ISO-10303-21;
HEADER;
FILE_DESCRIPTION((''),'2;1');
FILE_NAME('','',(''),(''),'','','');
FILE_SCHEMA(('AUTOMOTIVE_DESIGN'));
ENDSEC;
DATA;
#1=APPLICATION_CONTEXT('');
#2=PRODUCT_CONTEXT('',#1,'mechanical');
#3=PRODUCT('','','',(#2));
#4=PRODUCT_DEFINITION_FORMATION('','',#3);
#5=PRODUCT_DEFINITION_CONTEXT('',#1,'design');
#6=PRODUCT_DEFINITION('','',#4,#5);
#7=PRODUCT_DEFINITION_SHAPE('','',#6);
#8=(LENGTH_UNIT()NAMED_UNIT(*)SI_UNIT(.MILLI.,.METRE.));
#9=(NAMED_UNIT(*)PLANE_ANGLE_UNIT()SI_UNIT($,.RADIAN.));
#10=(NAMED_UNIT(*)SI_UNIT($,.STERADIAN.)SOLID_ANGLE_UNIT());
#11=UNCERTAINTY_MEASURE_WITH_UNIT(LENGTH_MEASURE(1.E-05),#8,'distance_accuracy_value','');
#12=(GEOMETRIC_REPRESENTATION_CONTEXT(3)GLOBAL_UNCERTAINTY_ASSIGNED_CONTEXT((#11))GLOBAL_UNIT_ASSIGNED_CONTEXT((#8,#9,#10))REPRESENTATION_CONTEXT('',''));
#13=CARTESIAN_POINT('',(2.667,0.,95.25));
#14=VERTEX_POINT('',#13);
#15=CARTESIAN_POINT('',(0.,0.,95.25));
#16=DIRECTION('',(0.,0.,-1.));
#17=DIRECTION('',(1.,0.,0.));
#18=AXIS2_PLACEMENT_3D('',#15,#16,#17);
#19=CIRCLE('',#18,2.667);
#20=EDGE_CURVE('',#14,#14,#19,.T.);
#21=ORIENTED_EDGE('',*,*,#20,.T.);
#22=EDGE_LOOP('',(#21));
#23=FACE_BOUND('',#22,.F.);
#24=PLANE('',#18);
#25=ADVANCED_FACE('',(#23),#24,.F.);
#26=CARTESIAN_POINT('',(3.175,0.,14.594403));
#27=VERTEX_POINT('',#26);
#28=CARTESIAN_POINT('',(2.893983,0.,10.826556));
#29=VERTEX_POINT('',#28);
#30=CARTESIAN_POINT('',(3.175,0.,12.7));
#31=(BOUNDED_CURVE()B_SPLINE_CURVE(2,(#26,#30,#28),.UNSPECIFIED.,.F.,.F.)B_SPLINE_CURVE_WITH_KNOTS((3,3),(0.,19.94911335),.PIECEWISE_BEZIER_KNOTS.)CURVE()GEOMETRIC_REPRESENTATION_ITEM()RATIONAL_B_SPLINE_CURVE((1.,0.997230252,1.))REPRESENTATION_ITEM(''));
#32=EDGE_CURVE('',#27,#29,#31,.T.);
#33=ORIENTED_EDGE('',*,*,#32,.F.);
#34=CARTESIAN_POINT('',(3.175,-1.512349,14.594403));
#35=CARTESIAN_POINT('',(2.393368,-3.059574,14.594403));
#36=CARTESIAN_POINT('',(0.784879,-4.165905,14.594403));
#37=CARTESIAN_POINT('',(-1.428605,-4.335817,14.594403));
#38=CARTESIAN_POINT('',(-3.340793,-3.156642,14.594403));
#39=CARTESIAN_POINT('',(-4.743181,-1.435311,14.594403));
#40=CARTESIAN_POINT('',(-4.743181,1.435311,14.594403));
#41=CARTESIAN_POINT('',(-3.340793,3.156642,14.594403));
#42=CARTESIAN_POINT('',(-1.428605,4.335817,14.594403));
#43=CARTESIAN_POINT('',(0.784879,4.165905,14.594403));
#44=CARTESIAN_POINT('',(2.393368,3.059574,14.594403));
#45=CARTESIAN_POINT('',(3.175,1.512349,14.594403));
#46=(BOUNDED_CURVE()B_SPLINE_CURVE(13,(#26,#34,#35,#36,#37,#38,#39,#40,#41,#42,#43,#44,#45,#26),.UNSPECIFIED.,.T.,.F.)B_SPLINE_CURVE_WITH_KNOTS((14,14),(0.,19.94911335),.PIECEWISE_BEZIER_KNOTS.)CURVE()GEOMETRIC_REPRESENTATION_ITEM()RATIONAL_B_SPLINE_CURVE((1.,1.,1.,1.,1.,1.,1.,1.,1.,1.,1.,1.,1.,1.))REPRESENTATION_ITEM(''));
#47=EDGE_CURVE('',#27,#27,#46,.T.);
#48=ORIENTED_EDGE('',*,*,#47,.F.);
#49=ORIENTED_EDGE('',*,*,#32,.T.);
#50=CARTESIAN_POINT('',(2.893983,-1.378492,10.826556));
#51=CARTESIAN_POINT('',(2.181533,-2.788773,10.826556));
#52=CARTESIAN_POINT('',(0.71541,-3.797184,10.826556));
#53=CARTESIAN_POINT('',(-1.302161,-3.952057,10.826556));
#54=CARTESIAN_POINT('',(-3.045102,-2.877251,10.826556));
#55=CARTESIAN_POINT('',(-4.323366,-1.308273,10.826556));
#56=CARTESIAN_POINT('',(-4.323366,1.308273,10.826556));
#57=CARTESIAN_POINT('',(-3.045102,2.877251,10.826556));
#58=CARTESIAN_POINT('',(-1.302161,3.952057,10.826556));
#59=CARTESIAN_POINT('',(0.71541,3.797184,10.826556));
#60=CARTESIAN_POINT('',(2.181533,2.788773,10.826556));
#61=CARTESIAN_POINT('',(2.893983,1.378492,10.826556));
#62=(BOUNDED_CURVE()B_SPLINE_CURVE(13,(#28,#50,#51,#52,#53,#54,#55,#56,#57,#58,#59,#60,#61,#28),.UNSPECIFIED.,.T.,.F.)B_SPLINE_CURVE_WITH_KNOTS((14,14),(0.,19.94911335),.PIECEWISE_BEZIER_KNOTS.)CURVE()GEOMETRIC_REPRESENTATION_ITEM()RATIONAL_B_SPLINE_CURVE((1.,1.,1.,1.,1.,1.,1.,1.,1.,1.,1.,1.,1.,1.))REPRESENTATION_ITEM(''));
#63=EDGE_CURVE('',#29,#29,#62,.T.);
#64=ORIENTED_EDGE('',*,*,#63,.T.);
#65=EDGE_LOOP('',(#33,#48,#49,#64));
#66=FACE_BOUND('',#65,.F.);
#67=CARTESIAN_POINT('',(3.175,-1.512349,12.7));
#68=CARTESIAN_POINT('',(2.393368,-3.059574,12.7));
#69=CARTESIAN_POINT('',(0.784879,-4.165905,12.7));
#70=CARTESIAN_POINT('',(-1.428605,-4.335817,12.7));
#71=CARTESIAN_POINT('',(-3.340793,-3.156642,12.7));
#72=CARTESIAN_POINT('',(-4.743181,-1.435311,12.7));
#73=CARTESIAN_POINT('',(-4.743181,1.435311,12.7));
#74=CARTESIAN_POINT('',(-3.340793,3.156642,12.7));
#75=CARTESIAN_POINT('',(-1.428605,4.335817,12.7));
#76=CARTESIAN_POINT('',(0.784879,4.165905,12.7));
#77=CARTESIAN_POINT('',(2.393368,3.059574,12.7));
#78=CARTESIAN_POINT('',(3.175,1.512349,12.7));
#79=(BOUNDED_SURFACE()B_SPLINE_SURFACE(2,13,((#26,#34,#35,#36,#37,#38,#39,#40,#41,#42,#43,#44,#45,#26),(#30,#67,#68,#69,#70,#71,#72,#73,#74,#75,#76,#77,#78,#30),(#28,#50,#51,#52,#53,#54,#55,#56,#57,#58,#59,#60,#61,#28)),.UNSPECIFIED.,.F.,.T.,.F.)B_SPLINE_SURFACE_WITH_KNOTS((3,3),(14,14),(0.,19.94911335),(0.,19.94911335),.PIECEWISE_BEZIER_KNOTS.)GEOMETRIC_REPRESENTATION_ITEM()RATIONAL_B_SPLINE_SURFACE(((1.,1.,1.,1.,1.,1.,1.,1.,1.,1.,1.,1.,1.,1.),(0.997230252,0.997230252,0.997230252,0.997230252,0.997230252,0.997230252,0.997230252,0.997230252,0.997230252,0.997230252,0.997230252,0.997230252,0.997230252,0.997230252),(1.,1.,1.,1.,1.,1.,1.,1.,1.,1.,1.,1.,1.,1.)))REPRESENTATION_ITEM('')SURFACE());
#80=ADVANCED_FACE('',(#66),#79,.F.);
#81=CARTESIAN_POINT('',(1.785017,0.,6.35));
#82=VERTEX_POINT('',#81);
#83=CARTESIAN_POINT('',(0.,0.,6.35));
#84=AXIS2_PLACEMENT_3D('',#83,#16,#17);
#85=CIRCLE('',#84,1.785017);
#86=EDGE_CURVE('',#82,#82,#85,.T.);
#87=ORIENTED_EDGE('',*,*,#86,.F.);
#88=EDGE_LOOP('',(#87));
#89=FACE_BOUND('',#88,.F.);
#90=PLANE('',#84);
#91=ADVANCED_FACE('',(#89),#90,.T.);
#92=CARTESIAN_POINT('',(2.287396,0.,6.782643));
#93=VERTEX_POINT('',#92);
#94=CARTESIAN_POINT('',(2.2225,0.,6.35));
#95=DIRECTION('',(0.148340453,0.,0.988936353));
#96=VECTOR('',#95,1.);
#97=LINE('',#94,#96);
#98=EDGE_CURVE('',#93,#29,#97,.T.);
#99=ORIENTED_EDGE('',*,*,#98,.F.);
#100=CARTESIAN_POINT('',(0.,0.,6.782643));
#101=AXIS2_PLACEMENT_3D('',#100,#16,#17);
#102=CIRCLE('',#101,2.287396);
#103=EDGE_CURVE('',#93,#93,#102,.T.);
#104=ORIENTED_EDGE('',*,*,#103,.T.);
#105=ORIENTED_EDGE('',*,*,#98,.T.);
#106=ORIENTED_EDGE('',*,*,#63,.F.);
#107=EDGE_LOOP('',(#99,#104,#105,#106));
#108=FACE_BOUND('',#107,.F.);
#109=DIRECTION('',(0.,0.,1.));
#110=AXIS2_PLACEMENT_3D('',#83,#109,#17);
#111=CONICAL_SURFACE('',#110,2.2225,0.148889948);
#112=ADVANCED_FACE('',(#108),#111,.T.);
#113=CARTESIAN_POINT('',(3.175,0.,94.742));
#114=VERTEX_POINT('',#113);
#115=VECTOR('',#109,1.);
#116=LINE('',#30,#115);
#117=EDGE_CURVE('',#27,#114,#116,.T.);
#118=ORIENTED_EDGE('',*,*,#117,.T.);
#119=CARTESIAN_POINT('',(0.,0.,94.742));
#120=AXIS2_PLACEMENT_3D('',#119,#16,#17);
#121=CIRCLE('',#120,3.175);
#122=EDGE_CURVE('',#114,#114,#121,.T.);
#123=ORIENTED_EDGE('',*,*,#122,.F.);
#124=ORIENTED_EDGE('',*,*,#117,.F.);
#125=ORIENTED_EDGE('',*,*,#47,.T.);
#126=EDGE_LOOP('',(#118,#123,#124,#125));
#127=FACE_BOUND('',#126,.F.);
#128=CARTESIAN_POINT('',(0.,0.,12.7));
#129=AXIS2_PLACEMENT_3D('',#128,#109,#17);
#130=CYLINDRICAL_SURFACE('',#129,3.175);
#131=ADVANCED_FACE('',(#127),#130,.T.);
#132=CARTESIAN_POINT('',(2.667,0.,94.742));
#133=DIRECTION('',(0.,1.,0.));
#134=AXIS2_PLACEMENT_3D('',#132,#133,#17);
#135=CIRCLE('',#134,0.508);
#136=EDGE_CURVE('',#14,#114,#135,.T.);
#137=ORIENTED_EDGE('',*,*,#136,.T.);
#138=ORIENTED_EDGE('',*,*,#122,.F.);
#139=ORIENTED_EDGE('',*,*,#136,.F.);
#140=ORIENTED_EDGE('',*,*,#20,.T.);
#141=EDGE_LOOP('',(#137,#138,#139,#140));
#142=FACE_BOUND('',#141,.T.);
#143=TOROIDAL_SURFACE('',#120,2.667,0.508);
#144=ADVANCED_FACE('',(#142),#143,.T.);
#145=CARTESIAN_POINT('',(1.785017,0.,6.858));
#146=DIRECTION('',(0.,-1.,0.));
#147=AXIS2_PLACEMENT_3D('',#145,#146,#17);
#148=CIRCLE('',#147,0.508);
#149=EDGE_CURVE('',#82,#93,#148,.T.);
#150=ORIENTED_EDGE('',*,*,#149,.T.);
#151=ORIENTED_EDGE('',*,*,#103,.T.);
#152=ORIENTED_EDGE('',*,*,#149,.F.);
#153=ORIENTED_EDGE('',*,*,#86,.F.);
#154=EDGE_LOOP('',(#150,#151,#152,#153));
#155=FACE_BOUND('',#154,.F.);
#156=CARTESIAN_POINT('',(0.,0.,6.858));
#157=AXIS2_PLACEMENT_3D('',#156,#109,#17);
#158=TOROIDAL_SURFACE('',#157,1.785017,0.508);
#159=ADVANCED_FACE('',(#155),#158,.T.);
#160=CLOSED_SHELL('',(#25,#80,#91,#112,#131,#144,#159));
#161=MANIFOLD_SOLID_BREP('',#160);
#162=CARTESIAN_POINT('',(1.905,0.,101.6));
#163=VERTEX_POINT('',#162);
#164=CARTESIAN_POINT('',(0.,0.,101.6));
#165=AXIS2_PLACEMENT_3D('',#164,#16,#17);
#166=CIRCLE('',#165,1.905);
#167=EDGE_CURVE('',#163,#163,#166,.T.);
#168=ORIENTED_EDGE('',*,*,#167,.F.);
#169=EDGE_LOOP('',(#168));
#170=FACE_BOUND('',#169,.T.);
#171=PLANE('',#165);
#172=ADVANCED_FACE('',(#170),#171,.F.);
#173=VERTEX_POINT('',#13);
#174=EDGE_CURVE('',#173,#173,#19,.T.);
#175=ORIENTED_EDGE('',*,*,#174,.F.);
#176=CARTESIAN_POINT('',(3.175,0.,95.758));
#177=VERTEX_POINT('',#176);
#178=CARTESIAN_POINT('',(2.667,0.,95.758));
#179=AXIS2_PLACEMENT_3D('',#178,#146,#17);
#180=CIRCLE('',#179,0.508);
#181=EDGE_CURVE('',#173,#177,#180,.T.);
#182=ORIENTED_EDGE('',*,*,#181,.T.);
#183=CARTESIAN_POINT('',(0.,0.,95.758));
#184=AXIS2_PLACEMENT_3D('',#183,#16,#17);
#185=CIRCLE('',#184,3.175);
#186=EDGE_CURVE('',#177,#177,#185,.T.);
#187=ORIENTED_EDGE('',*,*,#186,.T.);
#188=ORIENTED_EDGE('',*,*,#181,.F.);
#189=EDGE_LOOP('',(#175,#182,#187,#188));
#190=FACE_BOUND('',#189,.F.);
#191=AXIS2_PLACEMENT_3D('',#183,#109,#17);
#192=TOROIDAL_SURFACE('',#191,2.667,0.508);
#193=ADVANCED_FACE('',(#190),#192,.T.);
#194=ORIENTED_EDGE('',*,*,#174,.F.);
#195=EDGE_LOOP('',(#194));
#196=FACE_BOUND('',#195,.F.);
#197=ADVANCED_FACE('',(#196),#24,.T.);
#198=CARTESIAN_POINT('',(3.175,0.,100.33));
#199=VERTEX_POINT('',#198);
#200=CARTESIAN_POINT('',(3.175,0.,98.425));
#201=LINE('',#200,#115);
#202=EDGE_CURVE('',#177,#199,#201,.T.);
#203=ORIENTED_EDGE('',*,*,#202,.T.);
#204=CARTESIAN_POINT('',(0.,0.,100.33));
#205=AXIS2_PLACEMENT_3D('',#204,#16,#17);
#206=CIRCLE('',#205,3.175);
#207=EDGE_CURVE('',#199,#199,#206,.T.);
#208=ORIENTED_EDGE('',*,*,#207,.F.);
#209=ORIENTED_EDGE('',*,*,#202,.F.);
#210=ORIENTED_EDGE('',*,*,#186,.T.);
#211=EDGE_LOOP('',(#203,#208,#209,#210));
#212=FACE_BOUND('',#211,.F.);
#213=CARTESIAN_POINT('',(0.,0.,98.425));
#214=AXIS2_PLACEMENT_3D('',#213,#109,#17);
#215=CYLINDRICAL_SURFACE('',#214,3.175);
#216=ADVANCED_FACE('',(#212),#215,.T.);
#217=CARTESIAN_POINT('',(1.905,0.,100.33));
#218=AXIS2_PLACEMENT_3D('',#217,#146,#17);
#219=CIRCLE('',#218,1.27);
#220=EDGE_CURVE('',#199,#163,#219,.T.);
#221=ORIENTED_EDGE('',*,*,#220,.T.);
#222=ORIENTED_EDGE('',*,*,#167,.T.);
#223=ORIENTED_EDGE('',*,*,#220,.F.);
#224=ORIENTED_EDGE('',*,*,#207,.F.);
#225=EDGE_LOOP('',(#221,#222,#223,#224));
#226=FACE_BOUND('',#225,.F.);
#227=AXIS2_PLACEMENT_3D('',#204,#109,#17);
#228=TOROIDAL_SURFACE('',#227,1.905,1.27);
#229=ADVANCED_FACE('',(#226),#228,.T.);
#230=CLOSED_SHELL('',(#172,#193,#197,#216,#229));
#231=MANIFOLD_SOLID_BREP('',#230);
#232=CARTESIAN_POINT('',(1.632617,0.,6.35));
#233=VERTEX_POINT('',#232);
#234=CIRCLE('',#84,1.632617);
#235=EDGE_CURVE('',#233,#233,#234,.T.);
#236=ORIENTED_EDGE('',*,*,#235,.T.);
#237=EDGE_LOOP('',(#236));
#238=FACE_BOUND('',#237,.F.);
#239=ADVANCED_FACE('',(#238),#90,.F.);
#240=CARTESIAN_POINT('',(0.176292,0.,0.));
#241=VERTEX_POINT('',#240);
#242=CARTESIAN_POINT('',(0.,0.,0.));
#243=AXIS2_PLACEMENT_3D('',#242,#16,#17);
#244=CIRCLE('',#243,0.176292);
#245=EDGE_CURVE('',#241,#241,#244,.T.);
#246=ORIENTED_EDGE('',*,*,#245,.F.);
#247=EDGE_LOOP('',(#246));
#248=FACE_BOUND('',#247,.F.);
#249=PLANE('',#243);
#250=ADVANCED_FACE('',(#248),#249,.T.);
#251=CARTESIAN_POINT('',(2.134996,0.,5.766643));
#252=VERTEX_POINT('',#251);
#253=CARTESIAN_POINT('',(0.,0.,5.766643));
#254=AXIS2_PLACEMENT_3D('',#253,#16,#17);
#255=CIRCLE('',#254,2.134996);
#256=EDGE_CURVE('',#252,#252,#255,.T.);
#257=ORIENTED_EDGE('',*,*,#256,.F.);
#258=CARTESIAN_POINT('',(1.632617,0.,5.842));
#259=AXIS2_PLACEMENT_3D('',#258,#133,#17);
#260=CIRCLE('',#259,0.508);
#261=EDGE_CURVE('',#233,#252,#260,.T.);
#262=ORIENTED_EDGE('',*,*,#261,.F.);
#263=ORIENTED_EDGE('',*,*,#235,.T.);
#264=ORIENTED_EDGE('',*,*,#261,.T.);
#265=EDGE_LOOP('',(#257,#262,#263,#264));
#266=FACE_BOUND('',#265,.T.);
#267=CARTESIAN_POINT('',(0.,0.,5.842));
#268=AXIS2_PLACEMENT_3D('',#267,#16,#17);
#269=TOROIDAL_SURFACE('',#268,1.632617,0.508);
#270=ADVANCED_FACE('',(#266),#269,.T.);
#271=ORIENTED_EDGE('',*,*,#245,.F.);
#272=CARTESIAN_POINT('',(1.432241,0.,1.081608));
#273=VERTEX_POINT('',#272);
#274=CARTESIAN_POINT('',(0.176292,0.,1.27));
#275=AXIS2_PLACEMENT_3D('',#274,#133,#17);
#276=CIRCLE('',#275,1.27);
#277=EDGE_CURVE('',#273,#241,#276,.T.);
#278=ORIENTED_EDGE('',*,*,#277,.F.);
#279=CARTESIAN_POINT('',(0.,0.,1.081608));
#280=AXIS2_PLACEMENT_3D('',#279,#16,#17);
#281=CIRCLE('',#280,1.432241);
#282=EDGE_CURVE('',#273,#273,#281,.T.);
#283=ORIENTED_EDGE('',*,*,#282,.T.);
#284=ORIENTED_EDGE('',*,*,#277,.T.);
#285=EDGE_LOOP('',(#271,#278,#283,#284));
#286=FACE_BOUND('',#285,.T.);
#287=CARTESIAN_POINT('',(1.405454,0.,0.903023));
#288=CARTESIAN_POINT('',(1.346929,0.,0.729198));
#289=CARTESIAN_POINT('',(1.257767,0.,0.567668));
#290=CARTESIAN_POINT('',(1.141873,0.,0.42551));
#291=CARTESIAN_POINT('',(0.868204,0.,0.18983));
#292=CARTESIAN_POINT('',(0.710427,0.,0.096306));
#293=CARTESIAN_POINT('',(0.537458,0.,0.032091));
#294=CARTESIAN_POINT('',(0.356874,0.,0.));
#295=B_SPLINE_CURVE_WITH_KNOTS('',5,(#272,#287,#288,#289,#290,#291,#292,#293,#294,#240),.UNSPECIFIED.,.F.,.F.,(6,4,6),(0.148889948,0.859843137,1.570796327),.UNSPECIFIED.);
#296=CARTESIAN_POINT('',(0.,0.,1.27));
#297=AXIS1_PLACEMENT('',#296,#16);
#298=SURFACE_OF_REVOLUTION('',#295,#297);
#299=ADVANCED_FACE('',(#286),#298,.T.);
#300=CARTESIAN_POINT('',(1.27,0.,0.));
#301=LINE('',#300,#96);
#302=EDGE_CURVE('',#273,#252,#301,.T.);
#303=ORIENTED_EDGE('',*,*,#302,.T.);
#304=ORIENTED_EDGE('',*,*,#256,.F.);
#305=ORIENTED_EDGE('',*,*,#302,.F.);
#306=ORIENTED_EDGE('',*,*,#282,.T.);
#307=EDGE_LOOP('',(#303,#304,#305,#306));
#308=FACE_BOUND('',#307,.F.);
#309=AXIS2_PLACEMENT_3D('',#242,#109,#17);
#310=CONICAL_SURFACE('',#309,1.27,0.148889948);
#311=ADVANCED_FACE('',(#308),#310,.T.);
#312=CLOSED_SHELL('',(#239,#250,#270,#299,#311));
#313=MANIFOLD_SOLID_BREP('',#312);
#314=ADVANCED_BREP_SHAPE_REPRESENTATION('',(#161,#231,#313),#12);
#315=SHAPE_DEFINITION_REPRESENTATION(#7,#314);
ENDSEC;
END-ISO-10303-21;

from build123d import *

# Parameters (mm, degrees)
F0_W   = 3.175
F0_H   = 6.35
F3_R   = 0.508
F3_2_R = 0.508
F3_3_R = 0.508
F4_R   = 1.27
F4_2_R = 1.27
F5_R   = 25.4


with BuildPart() as f1:
    # F0 (on Front) → F1 (revolve)
    with BuildSketch(Plane.XZ):
        Polygon((3.175, 95.25), (0, 95.25), (0, 6.35), (2.2225, 6.35), (3.175, 12.7), align=None)
    revolve(axis=Axis((0, 0, 50.8), (0, 0, -1)))

    # F3
    f3_edges = [f1.edges().sort_by_distance(p)[0] for p in [
        (-2.2225, 0, 6.35),
        (-3.175, 0, 95.25),
    ]]
    fillet(f3_edges, radius=F3_R)

    # F5
    f5_edges = [f1.edges().sort_by_distance(p)[0] for p in [
        (-3.175, 0, 12.7),
    ]]
    fillet(f5_edges, radius=F5_R)


with BuildPart() as f2:
    # F0 (on Front) → F2 (revolve)
    with BuildSketch(Plane.XZ):
        with Locations((1.5875, 98.425)):
            Rectangle(F0_W, F0_H)
    revolve(axis=Axis((0, 0, 50.8), (0, 0, -1)))

    # F3#3
    f3_3_edges = [f2.edges().sort_by_distance(p)[0] for p in [
        (-3.175, 0, 95.25),
    ]]
    fillet(f3_3_edges, radius=F3_3_R)

    # F4
    f4_edges = [f2.edges().sort_by_distance(p)[0] for p in [
        (-3.175, 0, 101.6),
    ]]
    fillet(f4_edges, radius=F4_R)


with BuildPart() as f2b:
    # F0 (on Front) → F2, piece 2 (revolve)
    with BuildSketch(Plane.XZ):
        Polygon((2.2225, 6.35), (0, 6.35), (0, 0), (1.27, 0), align=None)
    revolve(axis=Axis((0, 0, 50.8), (0, 0, -1)))

    # F3#2
    f3_2_edges = [f2b.edges().sort_by_distance(p)[0] for p in [
        (-2.2225, 0, 6.35),
    ]]
    fillet(f3_2_edges, radius=F3_2_R)

    # F4#2
    f4_2_edges = [f2b.edges().sort_by_distance(p)[0] for p in [
        (-1.27, 0, 0),
    ]]
    fillet(f4_2_edges, radius=F4_2_R)


solid = Compound([f1.part, f2.part, f2b.part])
